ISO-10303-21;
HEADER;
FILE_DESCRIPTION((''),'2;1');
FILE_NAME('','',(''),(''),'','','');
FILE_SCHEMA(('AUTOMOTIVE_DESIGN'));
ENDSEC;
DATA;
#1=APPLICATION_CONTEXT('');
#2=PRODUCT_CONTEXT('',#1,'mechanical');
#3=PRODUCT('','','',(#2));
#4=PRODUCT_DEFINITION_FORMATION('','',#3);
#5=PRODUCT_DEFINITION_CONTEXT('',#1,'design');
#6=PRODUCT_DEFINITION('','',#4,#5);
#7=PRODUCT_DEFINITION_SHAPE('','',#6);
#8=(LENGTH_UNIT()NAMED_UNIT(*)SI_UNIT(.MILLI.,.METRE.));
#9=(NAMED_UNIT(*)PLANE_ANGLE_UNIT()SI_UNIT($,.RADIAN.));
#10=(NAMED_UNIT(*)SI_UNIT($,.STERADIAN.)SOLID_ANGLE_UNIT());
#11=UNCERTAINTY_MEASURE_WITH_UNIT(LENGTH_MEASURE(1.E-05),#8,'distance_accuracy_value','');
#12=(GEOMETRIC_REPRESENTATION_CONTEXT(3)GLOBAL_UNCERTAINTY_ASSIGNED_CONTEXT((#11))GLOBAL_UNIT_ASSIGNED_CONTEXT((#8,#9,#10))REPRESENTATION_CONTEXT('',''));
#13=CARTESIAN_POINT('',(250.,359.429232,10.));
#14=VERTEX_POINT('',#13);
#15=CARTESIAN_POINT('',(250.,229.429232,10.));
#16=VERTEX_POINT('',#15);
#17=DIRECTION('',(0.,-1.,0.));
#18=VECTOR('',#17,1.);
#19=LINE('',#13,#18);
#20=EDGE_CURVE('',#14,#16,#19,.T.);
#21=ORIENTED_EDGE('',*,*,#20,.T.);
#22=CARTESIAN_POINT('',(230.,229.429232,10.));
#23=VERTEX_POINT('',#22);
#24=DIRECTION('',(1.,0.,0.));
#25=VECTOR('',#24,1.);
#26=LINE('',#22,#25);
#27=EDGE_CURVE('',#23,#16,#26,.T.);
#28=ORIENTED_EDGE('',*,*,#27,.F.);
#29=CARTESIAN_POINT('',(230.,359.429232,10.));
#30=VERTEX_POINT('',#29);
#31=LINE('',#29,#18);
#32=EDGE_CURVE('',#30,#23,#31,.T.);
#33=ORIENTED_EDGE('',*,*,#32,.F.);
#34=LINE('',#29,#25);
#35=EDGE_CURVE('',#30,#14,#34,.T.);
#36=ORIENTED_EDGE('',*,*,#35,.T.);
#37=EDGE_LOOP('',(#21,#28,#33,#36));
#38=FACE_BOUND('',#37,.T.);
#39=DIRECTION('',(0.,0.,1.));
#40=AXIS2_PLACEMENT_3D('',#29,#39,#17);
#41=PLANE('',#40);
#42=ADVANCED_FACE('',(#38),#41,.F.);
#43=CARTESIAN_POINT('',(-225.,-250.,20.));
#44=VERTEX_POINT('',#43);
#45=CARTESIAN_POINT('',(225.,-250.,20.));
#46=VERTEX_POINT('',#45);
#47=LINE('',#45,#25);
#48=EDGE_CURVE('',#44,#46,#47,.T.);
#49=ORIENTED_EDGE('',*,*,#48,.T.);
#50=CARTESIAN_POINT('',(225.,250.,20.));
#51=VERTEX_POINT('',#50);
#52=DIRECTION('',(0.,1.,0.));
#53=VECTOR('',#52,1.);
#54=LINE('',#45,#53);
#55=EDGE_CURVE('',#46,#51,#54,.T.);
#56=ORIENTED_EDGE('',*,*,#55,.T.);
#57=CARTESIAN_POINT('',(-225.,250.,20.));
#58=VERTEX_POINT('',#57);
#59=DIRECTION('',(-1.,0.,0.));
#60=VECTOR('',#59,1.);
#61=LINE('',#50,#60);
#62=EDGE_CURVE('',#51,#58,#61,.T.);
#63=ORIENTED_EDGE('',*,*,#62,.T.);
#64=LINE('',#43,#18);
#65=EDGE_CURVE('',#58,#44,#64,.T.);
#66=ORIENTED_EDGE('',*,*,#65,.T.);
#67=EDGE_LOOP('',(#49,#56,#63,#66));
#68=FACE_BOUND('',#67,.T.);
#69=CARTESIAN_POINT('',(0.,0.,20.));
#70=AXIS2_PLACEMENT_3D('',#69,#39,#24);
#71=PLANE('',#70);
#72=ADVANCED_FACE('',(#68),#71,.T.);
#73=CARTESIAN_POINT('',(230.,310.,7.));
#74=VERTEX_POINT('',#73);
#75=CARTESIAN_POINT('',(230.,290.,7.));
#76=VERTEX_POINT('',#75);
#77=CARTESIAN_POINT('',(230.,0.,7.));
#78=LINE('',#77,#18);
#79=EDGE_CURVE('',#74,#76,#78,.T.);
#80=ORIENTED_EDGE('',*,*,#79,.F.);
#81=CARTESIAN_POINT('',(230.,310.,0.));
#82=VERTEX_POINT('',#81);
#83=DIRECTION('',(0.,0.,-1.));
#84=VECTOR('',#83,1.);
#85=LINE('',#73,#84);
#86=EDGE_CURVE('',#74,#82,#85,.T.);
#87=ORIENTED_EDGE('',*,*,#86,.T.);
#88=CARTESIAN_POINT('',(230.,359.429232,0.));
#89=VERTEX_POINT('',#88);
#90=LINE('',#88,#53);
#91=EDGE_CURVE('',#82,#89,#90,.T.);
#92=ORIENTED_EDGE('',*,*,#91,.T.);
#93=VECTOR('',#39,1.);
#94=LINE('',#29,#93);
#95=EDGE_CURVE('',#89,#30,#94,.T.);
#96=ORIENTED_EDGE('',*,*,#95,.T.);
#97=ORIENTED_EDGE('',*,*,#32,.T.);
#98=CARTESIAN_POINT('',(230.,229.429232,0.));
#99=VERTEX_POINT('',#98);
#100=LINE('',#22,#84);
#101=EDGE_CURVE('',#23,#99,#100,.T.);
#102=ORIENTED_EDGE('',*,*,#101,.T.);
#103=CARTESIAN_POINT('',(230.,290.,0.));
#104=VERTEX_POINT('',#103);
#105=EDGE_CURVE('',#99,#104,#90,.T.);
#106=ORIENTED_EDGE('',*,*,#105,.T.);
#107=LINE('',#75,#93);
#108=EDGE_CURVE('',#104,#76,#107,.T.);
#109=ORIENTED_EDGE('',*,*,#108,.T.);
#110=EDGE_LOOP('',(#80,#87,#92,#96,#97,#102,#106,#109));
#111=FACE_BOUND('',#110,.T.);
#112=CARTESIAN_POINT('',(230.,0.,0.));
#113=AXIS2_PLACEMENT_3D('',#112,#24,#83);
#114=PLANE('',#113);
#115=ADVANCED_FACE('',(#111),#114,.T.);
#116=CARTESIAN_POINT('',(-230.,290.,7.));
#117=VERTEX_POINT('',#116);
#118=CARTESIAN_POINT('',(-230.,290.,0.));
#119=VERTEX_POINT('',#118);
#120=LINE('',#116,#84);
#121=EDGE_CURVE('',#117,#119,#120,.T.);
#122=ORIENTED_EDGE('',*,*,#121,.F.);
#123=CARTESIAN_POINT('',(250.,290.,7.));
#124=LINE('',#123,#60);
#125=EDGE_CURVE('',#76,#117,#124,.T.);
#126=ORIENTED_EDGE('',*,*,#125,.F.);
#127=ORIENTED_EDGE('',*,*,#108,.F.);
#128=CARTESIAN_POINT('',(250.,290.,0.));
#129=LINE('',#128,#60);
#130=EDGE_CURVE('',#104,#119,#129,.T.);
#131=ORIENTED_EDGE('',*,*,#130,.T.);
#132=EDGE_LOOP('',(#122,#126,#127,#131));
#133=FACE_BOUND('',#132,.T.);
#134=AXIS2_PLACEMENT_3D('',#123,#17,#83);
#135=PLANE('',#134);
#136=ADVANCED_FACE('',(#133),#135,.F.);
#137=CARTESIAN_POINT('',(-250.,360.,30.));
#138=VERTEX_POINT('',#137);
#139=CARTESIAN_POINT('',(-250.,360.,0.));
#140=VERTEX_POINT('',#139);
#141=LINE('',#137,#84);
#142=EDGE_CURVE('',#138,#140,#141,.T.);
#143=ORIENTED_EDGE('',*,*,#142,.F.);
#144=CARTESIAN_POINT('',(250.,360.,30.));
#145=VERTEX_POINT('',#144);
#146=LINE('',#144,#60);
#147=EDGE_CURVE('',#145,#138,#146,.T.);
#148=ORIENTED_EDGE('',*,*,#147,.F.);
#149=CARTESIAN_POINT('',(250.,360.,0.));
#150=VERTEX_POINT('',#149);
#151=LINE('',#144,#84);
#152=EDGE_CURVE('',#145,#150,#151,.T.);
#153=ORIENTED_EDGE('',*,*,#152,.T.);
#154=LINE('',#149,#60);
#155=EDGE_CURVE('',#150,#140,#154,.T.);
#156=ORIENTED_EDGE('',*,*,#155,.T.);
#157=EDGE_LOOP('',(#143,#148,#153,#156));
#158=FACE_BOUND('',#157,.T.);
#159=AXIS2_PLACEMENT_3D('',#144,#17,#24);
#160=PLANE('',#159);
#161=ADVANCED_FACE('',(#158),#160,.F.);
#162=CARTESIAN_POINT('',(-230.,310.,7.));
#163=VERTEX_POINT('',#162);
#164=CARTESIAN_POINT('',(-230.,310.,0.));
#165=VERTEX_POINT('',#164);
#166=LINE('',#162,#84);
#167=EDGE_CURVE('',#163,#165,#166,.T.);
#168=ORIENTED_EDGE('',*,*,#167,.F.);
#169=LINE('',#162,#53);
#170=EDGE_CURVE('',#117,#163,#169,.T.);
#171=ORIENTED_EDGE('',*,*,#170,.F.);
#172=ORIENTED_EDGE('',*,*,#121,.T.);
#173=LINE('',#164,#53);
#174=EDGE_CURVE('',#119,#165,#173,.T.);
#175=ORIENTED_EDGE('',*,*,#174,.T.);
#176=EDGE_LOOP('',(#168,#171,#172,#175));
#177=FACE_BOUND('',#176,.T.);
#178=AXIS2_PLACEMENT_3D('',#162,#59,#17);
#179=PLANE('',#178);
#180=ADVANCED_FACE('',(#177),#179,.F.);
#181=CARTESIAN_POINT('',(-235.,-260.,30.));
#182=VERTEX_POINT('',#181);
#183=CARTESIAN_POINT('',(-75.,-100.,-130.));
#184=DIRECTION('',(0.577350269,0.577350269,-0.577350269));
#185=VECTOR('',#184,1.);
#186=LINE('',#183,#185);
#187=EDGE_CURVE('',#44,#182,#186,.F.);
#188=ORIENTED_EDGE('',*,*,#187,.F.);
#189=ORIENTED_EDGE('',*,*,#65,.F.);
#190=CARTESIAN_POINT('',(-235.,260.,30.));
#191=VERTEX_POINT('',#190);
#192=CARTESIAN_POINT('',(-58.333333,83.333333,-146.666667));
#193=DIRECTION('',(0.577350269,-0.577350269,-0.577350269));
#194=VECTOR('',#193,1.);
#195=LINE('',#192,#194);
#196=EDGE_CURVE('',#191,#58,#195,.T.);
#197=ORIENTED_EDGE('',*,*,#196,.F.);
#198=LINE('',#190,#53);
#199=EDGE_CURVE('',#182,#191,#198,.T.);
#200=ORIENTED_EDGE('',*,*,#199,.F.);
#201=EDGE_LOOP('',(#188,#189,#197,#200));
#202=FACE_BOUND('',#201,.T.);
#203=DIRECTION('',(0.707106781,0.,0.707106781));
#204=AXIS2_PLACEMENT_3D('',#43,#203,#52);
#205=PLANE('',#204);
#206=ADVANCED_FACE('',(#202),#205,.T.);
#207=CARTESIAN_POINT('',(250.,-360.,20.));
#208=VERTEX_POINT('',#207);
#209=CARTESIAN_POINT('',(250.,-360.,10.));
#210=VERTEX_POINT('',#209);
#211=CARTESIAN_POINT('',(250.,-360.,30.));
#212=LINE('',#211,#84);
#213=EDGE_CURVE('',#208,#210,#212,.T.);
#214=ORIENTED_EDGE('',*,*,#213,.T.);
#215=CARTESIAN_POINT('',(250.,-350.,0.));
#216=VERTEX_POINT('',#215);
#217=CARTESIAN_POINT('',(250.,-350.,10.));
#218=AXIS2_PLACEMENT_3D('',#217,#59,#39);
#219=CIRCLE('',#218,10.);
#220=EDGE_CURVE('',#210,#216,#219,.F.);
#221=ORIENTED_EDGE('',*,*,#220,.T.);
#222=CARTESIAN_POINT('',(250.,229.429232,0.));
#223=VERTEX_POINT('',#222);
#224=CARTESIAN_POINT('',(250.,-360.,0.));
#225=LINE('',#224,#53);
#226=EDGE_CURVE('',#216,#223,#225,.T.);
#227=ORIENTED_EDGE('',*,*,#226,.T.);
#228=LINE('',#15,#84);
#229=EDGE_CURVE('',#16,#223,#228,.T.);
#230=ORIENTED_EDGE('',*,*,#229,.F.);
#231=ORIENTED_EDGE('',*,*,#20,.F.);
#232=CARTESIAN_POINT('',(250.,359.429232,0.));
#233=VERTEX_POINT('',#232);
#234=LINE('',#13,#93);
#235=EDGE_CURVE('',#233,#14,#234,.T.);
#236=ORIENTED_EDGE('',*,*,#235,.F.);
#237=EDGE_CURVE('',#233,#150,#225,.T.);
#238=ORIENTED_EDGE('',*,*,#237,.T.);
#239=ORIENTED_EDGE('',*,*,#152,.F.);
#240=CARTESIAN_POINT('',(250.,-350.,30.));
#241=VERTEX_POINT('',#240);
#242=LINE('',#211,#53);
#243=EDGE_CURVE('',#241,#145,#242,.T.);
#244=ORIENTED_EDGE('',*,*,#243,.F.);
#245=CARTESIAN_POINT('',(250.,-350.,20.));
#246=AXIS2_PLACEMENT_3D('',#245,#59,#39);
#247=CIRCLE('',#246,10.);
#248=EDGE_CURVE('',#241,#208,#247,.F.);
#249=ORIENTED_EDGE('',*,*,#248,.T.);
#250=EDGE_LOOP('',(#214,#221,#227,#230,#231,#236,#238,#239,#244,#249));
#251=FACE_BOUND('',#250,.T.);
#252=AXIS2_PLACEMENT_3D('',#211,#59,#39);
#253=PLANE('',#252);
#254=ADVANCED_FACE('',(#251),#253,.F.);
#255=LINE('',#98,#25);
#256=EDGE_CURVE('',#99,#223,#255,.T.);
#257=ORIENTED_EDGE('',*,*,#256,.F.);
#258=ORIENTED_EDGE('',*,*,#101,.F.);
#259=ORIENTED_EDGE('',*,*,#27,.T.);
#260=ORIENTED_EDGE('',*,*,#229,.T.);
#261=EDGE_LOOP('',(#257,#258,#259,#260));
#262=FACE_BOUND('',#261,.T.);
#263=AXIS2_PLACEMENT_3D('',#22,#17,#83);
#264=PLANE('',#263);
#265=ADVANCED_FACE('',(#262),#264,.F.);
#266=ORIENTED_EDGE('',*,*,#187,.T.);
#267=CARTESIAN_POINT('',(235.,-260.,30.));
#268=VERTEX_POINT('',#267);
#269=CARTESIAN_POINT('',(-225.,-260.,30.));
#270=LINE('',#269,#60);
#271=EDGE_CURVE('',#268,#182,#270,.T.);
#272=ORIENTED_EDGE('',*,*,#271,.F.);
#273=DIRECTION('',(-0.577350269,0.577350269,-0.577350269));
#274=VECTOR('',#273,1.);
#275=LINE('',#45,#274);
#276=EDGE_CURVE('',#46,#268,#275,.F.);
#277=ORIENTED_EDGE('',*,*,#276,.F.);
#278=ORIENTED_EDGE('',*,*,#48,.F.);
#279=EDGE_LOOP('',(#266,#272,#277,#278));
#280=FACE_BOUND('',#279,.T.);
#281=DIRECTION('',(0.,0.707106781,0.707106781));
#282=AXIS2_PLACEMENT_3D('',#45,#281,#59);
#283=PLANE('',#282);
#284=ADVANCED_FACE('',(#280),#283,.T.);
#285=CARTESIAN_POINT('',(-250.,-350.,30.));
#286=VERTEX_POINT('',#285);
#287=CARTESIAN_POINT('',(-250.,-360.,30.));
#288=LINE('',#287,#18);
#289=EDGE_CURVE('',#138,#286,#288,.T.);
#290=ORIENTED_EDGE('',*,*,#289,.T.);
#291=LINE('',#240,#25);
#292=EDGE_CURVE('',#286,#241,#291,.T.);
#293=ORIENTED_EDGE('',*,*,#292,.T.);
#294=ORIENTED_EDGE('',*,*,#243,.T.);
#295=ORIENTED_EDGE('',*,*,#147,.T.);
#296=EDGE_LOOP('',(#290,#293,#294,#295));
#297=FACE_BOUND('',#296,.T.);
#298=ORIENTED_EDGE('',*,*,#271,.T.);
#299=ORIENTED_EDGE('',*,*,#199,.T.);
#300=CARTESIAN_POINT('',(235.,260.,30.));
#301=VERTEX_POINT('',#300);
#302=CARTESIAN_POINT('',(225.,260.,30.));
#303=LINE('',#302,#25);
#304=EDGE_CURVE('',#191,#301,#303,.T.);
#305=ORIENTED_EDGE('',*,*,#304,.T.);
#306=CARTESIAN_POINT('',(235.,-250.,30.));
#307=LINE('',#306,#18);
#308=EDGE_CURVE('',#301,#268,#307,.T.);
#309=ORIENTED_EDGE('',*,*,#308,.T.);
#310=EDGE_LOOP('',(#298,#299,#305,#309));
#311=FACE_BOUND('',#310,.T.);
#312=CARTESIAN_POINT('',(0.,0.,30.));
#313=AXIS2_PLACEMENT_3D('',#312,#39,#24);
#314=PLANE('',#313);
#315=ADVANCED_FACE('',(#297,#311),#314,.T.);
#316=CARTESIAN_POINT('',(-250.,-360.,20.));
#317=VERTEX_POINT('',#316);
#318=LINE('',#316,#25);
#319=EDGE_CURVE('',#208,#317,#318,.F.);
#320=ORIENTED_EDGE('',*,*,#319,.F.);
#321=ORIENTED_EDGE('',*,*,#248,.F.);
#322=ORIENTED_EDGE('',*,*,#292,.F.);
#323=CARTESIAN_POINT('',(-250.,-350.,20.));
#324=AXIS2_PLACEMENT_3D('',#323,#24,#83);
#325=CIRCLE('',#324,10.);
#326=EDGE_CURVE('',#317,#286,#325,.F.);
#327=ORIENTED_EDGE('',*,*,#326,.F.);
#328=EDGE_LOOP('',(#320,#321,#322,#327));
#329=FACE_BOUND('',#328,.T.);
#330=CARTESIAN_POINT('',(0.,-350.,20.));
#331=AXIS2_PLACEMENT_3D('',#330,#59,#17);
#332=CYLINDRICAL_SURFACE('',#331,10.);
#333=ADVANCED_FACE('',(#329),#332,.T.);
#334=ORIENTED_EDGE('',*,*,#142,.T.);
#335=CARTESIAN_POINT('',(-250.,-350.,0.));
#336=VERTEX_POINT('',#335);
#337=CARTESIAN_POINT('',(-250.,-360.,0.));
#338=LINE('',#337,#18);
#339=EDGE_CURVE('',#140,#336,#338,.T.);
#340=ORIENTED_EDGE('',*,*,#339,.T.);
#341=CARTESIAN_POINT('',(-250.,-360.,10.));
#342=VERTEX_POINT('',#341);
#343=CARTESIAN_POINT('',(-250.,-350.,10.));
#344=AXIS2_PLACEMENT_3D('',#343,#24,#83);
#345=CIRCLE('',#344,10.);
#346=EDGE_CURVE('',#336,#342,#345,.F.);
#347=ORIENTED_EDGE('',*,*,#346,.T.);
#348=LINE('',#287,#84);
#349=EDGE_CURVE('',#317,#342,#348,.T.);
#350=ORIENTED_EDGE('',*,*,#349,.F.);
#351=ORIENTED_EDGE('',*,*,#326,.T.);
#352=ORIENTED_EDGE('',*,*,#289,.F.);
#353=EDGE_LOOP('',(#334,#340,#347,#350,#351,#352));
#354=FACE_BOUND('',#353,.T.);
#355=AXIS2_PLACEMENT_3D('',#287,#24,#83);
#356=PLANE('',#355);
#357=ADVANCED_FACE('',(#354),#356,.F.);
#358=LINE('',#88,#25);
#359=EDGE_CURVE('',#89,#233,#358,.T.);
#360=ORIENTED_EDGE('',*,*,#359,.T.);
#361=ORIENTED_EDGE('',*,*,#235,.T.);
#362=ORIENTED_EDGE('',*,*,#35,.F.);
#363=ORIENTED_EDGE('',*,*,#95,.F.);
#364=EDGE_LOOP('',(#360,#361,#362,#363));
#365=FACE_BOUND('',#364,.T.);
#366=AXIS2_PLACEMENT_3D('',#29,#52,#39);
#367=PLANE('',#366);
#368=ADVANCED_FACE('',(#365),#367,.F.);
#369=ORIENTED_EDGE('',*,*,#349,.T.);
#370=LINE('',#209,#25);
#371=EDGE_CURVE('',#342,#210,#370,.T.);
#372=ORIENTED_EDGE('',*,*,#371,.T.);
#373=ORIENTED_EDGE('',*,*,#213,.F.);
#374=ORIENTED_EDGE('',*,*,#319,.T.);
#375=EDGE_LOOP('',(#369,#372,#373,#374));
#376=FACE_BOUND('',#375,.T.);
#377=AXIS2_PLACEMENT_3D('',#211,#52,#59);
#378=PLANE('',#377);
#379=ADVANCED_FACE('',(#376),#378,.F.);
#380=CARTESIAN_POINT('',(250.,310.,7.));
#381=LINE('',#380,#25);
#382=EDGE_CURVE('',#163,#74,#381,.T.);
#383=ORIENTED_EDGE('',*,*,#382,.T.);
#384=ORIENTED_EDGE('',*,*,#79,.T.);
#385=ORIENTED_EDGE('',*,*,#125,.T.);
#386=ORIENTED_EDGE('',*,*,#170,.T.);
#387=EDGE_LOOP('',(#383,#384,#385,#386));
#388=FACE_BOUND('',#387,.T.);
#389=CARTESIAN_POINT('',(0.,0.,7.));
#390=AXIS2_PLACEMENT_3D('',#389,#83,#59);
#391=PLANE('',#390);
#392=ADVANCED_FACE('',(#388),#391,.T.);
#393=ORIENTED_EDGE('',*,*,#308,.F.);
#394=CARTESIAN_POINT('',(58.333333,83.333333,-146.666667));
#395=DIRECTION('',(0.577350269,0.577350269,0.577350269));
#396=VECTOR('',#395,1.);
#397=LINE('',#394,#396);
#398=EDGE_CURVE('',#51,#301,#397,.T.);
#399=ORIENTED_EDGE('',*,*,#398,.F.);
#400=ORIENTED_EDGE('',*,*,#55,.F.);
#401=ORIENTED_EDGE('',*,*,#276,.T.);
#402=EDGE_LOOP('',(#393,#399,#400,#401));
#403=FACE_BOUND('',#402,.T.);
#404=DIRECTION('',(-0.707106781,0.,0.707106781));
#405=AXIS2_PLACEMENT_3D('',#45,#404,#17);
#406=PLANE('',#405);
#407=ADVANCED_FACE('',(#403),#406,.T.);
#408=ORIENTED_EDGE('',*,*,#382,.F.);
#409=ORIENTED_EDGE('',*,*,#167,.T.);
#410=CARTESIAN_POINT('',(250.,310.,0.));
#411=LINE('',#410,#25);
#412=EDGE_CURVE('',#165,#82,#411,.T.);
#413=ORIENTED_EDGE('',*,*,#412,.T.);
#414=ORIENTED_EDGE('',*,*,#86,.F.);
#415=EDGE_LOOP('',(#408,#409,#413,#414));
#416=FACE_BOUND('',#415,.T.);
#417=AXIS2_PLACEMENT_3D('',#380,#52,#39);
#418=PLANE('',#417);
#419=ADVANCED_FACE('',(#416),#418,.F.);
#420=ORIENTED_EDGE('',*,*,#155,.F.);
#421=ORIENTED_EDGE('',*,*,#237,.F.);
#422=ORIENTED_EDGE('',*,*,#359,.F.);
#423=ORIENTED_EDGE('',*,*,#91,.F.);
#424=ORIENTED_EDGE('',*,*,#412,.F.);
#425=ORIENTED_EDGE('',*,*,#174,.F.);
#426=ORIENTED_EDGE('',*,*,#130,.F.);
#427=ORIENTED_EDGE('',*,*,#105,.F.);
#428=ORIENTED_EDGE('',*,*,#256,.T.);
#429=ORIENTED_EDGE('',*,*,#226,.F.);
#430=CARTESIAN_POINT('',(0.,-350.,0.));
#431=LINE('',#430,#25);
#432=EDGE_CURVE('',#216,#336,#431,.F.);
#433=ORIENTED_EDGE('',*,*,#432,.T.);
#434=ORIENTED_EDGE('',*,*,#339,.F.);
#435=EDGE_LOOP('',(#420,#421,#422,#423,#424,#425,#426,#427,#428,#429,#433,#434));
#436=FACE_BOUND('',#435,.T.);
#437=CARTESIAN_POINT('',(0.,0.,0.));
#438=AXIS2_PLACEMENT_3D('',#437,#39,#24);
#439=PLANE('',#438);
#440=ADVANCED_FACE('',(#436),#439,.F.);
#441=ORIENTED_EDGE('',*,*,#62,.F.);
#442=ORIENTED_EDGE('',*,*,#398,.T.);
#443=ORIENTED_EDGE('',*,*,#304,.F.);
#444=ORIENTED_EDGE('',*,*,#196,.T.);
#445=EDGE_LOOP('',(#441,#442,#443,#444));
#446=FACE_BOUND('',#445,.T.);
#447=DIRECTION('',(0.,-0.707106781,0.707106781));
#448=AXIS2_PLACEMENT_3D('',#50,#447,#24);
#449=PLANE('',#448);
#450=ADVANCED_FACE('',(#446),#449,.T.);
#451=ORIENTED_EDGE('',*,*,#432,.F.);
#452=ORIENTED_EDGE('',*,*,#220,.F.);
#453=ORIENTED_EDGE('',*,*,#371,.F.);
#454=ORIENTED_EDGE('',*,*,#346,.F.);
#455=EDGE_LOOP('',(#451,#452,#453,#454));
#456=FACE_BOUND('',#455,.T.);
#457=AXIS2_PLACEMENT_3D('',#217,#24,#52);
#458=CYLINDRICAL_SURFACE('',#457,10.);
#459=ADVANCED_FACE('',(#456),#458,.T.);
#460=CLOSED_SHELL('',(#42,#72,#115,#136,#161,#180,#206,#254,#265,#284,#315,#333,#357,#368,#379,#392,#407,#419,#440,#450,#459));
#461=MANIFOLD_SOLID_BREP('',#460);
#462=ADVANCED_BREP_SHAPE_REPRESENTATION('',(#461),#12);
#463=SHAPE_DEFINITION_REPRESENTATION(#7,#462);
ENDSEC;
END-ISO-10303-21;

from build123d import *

# Parameters (mm, degrees)
CROQUIS1_W              = 500
CROQUIS1_H              = 720
SALIENTE_EXTRUIR1_DEPTH = 30
CROQUIS2_W              = 450
CROQUIS2_H              = 500
CORTAR_EXTRUIR1_DEPTH   = 10
CHAFL_N1_SIZE           = 10
CHAFL_N2_SIZE           = 10
REDONDEO2_R             = 10
REDONDEO3_R             = 10
CROQUIS11_W             = 480
CROQUIS11_H             = 20
CORTAR_EXTRUIR5_DEPTH   = 7
CROQUIS12_W             = 10
CROQUIS12_H             = 130
CORTAR_EXTRUIR6_DEPTH   = 20


with BuildPart() as part:
    # Croquis1 → Saliente-Extruir1 (new body)
    with BuildSketch(Plane.XY):
        Rectangle(CROQUIS1_W, CROQUIS1_H)
    extrude(amount=SALIENTE_EXTRUIR1_DEPTH)

    # Croquis2 → Cortar-Extruir1 (cut)
    with BuildSketch(Plane.XY.offset(30)):
        Rectangle(CROQUIS2_W, CROQUIS2_H)
    extrude(amount=-CORTAR_EXTRUIR1_DEPTH, mode=Mode.SUBTRACT)

    # Chaflán1
    chafl_n1_edges = [part.edges().sort_by_distance(p)[0] for p in [
        (0, 250, 30),
    ]]
    chamfer(chafl_n1_edges, length=CHAFL_N1_SIZE - 0.0001)  # a hair under: the kernel refuses the full size

    # Chaflán2
    chafl_n2_edges = [part.edges().sort_by_distance(p)[0] for p in [
        (225, 4.99995, 30),
        (0, -250, 30),
        (-225, 4.99995, 30),
    ]]
    chamfer(chafl_n2_edges, length=CHAFL_N2_SIZE - 0.0001)  # a hair under: the kernel refuses the full size

    # Redondeo2
    redondeo2_edges = [part.edges().sort_by_distance(p)[0] for p in [
        (0, -360, 30),
    ]]
    fillet(redondeo2_edges, radius=REDONDEO2_R)

    # Redondeo3
    redondeo3_edges = [part.edges().sort_by_distance(p)[0] for p in [
        (0, -360, 0),
    ]]
    fillet(redondeo3_edges, radius=REDONDEO3_R)

    # Croquis11 → Cortar-Extruir5 (cut)
    with BuildSketch(Plane(origin=(0, 0, 0), x_dir=(-1, 0, 0), z_dir=(0, 0, -1))):
        with Locations((-10, 300)):
            Rectangle(CROQUIS11_W, CROQUIS11_H)
    extrude(amount=-CORTAR_EXTRUIR5_DEPTH, mode=Mode.SUBTRACT)

    # Croquis12 → Cortar-Extruir6 (cut)
    with BuildSketch(Plane(origin=(250, 0, 0), x_dir=(0, 0, -1), z_dir=(1, 0, 0))):
        with Locations((-5, 294.429232032)):
            Rectangle(CROQUIS12_W, CROQUIS12_H)
    extrude(amount=-CORTAR_EXTRUIR6_DEPTH, mode=Mode.SUBTRACT)


solid = part.part
